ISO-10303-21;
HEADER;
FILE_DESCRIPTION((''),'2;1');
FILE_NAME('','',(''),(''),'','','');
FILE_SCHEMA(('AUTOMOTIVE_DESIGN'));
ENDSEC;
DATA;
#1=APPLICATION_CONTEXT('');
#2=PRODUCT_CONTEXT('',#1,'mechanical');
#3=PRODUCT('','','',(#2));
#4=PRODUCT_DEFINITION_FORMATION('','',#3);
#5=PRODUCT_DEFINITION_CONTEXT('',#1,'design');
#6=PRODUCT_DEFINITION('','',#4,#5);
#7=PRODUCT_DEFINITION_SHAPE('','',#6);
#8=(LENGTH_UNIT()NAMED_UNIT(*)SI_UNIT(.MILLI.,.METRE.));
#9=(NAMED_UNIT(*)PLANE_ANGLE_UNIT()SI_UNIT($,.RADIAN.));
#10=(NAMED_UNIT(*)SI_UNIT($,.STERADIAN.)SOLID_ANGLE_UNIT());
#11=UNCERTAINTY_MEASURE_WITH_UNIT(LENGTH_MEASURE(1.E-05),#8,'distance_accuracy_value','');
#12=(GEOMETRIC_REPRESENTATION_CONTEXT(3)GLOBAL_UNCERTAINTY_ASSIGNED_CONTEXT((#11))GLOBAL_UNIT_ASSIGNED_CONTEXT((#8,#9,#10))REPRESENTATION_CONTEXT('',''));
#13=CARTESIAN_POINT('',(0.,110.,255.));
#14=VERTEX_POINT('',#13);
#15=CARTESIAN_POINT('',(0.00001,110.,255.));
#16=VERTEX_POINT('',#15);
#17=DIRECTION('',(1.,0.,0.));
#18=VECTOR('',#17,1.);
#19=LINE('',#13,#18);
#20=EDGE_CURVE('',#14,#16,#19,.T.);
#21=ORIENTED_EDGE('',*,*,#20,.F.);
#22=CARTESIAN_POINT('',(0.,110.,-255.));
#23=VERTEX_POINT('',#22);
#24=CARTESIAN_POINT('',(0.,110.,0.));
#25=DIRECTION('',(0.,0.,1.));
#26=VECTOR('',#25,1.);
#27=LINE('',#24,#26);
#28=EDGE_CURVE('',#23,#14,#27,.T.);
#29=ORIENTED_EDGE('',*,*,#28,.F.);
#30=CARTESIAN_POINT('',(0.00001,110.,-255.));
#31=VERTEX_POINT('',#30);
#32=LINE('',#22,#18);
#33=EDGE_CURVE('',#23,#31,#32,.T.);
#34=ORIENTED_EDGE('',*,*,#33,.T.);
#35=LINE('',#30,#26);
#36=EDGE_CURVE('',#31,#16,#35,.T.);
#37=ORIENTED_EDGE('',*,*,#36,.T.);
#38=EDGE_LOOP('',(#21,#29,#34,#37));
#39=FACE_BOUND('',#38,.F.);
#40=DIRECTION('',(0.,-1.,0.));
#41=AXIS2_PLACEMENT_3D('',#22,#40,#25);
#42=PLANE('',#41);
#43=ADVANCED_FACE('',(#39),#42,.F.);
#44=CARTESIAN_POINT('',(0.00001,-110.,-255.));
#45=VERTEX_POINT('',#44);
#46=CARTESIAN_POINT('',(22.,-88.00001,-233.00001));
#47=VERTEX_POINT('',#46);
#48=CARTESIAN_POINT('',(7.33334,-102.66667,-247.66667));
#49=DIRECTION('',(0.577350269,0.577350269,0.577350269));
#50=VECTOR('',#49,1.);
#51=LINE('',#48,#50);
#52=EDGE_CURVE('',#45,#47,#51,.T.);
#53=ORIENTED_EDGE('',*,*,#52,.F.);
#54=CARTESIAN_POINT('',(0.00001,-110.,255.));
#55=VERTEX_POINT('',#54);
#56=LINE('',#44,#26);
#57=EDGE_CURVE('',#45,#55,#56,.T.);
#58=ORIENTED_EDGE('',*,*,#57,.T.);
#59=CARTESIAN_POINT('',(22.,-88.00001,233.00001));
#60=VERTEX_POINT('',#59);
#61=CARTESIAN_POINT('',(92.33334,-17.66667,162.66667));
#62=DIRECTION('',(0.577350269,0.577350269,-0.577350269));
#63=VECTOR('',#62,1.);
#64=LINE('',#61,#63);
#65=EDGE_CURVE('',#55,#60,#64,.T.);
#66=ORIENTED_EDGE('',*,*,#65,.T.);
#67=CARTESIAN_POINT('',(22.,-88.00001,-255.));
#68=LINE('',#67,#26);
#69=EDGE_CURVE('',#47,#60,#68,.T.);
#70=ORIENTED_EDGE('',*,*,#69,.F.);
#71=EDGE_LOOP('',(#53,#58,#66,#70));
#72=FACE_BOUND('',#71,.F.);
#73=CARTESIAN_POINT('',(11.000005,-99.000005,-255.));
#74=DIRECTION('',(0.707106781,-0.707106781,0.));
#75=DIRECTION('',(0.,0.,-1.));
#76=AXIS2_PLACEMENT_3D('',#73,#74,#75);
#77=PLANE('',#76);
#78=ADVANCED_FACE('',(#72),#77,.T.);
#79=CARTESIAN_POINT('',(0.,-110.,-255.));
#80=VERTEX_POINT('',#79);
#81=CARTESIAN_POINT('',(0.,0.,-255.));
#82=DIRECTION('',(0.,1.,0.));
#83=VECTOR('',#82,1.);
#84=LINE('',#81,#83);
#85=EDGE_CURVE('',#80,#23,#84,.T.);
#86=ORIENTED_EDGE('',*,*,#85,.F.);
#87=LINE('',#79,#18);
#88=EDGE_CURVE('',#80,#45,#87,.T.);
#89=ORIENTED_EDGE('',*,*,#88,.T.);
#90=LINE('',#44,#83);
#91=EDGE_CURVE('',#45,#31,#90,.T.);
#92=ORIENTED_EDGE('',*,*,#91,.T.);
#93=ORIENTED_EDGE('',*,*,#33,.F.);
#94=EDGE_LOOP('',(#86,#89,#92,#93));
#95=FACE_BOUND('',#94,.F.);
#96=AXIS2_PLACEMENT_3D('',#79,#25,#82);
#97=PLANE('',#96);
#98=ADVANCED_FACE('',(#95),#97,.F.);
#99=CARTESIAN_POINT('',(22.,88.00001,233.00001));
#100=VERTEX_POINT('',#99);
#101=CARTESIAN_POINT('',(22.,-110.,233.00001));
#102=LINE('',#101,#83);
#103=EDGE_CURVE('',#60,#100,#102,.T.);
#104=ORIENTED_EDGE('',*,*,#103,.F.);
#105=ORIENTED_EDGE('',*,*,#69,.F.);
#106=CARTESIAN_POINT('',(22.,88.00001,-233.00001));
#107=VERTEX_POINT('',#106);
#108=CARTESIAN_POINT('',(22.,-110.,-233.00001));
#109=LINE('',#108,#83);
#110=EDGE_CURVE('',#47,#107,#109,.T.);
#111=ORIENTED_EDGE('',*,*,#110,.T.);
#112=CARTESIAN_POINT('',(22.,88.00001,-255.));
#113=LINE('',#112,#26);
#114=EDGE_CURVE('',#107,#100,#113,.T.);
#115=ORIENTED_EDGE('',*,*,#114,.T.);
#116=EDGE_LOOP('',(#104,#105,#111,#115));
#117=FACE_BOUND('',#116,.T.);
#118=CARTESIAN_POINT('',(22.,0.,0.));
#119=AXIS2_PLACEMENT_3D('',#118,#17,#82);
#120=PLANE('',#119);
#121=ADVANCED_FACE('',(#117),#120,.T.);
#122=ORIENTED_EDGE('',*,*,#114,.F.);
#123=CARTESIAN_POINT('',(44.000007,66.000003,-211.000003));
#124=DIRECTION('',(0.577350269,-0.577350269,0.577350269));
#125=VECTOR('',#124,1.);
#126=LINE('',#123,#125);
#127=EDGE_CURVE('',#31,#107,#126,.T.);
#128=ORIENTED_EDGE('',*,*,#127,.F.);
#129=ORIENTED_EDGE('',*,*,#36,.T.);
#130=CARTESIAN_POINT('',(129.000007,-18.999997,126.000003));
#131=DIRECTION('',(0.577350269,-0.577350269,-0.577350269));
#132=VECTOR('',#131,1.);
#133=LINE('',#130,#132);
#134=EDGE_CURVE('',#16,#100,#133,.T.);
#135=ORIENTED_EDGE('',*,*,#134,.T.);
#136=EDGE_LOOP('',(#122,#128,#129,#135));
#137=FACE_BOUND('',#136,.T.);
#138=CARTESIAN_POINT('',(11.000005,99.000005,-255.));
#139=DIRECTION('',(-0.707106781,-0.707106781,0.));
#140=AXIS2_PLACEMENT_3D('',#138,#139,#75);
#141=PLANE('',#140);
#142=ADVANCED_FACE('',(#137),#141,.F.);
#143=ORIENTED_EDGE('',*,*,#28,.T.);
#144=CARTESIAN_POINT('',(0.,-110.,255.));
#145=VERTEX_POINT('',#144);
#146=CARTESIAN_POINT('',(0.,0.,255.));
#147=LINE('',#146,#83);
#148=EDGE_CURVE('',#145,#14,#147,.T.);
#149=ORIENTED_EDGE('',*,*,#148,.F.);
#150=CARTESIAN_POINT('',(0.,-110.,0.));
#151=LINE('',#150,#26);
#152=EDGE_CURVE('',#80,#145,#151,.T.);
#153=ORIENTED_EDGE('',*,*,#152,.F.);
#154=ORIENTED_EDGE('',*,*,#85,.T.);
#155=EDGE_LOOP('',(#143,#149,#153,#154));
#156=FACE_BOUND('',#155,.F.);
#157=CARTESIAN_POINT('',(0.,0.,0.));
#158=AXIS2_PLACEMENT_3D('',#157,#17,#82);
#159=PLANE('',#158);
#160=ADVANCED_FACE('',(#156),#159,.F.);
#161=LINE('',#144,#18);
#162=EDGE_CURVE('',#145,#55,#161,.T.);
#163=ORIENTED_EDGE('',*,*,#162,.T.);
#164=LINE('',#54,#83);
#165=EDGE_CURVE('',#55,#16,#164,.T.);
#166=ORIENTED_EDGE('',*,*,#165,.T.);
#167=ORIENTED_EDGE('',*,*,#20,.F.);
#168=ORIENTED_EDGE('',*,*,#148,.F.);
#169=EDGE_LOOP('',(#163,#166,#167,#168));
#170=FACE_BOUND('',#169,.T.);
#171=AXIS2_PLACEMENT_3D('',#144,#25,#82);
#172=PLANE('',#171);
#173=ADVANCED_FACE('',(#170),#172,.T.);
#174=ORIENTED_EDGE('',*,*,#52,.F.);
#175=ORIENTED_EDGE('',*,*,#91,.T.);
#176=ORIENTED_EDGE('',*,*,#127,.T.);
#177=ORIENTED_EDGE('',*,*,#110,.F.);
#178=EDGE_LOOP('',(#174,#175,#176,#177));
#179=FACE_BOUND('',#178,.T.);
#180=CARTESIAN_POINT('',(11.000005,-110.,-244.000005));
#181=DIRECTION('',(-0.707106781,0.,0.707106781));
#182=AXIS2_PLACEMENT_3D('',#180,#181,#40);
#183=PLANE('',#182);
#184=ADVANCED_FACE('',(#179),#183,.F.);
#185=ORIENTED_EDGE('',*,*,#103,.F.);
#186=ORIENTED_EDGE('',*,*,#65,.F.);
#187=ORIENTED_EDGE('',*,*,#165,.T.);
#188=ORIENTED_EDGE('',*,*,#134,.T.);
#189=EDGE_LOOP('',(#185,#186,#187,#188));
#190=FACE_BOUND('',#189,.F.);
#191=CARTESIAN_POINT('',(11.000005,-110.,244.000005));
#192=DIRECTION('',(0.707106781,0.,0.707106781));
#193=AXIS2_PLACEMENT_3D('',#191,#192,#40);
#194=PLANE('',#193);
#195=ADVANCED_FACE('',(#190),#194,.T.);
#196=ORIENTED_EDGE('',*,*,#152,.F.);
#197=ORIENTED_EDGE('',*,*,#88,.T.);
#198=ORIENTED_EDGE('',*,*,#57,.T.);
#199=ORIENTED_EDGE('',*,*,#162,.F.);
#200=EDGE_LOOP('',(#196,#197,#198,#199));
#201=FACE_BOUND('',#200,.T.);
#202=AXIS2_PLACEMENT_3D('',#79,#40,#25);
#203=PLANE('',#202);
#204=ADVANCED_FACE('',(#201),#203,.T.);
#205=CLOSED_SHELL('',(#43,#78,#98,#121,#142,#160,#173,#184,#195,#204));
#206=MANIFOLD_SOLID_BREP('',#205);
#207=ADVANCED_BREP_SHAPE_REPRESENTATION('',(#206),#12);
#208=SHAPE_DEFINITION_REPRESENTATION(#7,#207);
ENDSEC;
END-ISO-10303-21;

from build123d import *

# Parameters (mm, degrees)
F0_W     = 220
F0_H     = 510
F1_DEPTH = 22
F2_SIZE  = 21.99999


# Not quite as in the source:
# - a fillet or chamfer is up to 0.001 mm smaller than in the source, because OpenCascade refuses the exact size


with BuildPart() as f1:
    # F0 (on Right) → F1 (new body)
    with BuildSketch(Plane.YZ):
        Rectangle(F0_W, F0_H)
    extrude(amount=F1_DEPTH)

    # F2 (size 22 in the source; OpenCascade refuses exactly that, so slightly less here)
    f2_edges = [f1.edges().sort_by_distance(p)[0] for p in [
        (22, 0, 255),
        (22, -110, 0),
        (22, 110, 0),
        (22, 0, -255),
    ]]
    chamfer(f2_edges, length=F2_SIZE)


solid = f1.part
